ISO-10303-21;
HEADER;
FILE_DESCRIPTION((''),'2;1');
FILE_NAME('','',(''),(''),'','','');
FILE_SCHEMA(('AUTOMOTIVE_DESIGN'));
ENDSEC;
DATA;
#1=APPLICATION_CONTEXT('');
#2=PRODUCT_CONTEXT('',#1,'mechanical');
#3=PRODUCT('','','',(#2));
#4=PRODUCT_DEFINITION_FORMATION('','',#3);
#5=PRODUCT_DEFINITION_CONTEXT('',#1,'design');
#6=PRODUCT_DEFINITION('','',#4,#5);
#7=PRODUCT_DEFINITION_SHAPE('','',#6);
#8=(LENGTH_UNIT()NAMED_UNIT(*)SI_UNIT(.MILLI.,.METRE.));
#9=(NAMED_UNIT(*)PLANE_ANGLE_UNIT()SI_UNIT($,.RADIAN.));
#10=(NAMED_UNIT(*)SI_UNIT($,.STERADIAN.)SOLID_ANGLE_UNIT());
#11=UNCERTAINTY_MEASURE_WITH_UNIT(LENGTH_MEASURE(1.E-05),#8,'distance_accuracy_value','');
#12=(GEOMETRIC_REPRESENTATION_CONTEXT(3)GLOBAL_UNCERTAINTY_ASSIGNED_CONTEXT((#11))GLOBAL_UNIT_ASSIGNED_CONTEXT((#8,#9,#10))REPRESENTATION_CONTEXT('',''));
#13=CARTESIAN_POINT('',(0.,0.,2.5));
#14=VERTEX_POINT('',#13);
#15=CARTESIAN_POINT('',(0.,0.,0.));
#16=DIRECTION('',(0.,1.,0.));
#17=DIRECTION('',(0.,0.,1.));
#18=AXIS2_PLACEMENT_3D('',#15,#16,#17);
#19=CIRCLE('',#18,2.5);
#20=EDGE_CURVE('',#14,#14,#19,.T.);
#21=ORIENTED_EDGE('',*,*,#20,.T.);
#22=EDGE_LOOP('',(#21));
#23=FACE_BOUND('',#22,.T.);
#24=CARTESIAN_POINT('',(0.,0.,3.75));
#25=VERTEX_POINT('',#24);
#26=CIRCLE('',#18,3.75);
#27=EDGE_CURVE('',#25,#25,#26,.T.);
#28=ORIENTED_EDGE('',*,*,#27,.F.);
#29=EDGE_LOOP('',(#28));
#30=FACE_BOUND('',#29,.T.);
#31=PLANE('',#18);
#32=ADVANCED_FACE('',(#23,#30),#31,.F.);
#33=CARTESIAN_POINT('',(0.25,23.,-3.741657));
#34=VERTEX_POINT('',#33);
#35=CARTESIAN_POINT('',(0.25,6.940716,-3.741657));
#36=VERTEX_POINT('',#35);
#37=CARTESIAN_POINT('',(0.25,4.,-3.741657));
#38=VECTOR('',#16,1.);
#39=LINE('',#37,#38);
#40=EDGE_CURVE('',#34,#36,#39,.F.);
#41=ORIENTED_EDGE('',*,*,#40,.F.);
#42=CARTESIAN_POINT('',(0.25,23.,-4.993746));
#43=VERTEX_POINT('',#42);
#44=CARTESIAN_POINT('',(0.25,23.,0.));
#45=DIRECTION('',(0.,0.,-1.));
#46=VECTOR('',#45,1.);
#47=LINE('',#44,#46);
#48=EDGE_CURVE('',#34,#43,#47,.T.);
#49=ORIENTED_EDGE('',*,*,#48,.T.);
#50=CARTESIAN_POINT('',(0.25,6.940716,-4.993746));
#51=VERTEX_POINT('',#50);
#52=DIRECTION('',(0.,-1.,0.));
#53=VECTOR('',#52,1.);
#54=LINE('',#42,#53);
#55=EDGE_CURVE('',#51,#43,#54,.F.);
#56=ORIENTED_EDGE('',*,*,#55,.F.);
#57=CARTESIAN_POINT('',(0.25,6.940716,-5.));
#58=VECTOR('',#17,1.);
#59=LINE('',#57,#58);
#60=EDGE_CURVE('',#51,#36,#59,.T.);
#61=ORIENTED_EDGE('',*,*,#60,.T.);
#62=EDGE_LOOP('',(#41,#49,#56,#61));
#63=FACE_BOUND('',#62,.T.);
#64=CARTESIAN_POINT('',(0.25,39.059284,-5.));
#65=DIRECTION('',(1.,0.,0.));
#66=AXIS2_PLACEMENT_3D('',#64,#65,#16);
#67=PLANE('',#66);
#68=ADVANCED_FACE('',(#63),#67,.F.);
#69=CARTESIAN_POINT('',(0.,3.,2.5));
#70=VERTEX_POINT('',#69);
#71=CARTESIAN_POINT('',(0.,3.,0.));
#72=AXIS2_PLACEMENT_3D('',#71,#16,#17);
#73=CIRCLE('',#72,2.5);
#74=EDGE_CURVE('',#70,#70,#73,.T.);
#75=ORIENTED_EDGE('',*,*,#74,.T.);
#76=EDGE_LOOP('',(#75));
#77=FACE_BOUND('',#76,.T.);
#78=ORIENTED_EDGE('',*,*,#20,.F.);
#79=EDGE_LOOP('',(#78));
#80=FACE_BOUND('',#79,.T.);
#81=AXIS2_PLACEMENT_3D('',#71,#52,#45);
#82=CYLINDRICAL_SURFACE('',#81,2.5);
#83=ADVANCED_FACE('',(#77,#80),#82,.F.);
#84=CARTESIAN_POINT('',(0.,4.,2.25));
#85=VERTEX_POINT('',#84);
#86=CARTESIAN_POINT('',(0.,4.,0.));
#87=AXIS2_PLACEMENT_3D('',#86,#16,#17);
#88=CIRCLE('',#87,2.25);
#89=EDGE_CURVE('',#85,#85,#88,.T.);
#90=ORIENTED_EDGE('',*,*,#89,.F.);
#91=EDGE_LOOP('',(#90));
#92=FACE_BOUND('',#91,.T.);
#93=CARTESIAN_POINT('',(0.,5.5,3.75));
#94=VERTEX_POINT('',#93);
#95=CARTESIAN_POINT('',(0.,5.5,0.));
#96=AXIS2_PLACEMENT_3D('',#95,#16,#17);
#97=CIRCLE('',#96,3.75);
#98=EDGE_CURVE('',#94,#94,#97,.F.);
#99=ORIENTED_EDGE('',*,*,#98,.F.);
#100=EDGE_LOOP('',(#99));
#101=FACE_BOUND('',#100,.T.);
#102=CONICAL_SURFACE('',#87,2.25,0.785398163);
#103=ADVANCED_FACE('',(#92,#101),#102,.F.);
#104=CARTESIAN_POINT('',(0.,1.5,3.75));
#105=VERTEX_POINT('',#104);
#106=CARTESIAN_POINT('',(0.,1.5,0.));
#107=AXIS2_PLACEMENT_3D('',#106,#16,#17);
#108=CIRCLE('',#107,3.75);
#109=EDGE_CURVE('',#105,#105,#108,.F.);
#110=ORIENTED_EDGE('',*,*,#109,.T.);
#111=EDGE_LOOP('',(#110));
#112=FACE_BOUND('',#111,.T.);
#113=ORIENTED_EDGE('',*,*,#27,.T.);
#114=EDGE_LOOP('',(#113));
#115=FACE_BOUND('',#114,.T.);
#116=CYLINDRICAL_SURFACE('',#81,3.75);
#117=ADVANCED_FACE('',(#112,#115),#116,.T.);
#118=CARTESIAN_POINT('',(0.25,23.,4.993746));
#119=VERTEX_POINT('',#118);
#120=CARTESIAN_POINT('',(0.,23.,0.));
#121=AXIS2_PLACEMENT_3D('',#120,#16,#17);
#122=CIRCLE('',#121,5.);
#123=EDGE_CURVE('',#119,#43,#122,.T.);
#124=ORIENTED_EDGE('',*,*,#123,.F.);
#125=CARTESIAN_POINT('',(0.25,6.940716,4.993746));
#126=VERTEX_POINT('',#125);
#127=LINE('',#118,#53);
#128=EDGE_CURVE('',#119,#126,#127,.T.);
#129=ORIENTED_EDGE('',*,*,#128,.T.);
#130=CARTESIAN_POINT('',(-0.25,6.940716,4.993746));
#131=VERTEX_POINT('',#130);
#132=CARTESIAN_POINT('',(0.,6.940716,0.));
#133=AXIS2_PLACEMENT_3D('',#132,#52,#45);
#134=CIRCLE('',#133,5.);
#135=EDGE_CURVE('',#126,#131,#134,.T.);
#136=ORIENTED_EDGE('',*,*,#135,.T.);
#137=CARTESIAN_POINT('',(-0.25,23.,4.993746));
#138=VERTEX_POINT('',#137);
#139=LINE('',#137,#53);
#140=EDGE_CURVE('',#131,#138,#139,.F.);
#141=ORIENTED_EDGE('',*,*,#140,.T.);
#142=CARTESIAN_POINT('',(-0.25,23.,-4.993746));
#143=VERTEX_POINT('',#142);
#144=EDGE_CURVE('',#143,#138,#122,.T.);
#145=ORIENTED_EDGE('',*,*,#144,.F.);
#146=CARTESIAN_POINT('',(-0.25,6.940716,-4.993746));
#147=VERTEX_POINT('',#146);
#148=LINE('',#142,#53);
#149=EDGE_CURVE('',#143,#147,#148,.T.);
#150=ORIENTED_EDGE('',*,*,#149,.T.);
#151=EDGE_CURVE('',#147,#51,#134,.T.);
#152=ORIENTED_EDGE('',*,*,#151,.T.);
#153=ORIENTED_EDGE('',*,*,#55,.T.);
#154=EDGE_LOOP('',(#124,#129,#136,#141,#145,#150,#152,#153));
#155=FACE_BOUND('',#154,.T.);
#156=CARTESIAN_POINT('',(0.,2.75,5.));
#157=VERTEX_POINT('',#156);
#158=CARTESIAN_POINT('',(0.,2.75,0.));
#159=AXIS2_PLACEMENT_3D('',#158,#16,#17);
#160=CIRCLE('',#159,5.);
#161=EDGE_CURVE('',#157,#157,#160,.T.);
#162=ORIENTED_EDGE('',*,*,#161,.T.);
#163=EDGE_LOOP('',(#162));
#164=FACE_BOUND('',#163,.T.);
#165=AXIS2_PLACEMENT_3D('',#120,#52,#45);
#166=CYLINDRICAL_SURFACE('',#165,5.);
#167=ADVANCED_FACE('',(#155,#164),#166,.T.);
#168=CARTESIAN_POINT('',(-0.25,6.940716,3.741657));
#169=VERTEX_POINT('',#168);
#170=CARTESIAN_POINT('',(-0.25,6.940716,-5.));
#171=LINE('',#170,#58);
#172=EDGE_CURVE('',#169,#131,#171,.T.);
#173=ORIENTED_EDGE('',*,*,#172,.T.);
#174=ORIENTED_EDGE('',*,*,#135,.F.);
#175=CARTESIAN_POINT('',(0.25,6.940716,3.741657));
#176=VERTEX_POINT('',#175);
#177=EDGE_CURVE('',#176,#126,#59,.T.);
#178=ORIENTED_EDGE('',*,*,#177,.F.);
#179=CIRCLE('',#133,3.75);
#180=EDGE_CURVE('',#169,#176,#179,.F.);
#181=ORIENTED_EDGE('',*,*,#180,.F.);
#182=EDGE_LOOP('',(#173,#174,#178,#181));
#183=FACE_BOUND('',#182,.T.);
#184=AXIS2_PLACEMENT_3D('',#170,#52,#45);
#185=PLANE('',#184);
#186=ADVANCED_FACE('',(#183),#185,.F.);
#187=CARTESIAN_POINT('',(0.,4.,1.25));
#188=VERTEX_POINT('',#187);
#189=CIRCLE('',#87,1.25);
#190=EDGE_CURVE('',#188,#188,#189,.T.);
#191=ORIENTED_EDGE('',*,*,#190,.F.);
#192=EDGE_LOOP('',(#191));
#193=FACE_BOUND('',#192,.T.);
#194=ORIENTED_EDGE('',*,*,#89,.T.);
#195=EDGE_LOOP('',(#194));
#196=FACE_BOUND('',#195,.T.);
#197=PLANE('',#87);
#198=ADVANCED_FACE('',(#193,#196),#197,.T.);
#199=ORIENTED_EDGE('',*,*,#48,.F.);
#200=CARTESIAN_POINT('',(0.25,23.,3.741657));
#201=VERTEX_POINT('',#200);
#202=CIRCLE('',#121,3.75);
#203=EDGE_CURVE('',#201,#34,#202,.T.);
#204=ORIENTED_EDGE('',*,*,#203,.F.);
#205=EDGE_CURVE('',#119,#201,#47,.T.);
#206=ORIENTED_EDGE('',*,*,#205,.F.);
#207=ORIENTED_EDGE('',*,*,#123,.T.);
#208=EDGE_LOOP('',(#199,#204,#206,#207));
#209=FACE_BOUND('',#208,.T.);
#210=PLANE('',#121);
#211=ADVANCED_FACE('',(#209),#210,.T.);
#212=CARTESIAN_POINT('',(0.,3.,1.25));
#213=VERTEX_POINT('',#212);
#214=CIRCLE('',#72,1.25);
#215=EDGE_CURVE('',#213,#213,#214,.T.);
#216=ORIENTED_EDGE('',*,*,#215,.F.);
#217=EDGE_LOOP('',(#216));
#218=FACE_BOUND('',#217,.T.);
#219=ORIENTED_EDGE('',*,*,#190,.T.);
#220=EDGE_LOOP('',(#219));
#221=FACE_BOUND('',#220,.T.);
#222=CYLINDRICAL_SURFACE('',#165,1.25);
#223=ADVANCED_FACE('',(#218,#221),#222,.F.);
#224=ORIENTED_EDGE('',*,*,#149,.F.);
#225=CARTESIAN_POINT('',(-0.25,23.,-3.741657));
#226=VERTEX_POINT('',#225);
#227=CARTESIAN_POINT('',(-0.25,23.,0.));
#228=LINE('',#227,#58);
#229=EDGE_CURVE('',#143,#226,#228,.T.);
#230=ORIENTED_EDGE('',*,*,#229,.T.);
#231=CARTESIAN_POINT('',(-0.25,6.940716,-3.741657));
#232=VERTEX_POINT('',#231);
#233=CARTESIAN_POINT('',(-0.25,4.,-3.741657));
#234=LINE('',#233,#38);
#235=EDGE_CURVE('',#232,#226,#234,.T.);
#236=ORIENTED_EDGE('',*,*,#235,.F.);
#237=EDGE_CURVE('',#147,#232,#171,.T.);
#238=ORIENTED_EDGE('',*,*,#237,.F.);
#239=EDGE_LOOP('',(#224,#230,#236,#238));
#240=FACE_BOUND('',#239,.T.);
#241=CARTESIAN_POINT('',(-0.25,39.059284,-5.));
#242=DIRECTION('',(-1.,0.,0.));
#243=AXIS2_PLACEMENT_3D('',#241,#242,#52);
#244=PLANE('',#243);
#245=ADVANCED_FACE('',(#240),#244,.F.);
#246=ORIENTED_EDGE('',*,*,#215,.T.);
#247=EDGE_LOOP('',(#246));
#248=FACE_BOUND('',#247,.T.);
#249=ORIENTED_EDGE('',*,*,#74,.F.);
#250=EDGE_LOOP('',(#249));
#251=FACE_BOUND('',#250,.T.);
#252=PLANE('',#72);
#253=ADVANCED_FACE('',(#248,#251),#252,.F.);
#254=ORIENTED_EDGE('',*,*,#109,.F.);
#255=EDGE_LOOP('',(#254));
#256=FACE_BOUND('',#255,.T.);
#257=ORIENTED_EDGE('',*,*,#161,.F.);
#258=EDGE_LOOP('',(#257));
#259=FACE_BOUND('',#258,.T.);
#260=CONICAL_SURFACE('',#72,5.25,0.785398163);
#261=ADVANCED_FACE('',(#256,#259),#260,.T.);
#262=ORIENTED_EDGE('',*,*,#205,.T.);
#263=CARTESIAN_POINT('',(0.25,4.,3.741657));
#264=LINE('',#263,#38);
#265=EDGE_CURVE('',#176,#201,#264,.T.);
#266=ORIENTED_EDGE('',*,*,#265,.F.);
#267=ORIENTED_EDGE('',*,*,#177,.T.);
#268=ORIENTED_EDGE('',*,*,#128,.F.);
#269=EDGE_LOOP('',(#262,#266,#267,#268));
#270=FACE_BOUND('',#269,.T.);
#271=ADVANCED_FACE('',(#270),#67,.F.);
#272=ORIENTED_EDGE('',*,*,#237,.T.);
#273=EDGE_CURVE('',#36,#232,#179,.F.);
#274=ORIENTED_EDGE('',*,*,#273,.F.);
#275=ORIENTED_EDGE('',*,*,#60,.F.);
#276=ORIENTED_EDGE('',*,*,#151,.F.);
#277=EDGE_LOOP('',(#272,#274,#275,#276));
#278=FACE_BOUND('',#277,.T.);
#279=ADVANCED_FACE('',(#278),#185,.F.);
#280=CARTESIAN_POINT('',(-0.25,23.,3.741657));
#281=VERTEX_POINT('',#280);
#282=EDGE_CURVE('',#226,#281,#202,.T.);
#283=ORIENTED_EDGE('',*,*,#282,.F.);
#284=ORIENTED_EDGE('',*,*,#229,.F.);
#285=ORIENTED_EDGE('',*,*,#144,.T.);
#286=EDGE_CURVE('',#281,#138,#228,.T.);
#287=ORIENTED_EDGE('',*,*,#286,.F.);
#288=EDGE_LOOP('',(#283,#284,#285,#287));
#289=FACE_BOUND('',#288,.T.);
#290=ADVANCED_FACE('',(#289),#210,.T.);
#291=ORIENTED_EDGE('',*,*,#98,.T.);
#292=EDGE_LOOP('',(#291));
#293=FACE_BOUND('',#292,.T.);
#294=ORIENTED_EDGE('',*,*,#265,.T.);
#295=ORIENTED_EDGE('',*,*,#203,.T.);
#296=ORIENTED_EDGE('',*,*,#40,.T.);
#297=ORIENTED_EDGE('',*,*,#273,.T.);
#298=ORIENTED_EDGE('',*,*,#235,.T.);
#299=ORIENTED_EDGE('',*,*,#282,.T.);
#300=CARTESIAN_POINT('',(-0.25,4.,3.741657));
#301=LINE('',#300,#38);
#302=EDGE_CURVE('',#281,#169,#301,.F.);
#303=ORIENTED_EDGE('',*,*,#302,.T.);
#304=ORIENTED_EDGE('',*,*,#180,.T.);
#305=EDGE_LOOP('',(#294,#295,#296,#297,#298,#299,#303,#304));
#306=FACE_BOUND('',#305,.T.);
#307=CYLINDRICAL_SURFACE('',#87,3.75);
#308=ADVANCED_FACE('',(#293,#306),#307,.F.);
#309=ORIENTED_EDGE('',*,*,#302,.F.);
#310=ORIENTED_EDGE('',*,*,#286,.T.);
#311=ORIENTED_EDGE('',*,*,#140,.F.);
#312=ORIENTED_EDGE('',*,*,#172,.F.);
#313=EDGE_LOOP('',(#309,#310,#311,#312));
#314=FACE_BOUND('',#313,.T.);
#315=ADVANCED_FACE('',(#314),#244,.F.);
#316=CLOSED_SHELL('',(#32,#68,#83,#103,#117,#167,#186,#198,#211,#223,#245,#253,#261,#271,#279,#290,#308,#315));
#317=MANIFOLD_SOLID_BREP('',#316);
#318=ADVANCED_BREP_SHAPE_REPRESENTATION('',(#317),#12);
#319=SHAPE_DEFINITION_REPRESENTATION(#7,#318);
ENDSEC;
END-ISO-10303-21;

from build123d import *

# Parameters (mm, degrees)
SKETCH1_R               = 3.75
SKETCH1_R_2             = 2.5
BOSS_EXTRUDE1_DEPTH     = 3
SKETCH2_R               = 5
SKETCH2_R_2             = 1.25
BOSS_EXTRUDE2_DEPTH     = 20
CUT_EXTRUDE1_START      = -19
SKETCH3_R               = 3.75
CUT_EXTRUDE1_DEPTH      = 19
CHAMFER1_SIZE           = 1.5
CUT_EXTRUDE2_DEPTH      = 25.062418831
CUT_EXTRUDE2_DEPTH_BACK = 25.062418831
SKETCH4_W               = 0.5
SKETCH4_H               = 32.118567902


with BuildPart() as part:
    # Sketch1 → Boss-Extrude1 (new body)
    with BuildSketch(Plane(origin=(0, 0, 0), x_dir=(1, 0, 0), z_dir=(0, 1, 0))):
        with Locations(Location((0, 0, 0), (0, 0, 270))):
            Circle(SKETCH1_R)
        with Locations(Location((0, 0, 0), (0, 0, 270))):
            Circle(SKETCH1_R_2, mode=Mode.SUBTRACT)
    extrude(amount=BOSS_EXTRUDE1_DEPTH)

    # Sketch2 → Boss-Extrude2 (add)
    with BuildSketch(Plane(origin=(0, 3, 0), x_dir=(1, 0, 0), z_dir=(0, 1, 0))):
        with Locations(Location((0, 0, 0), (0, 0, 270))):
            Circle(SKETCH2_R)
        with Locations(Location((0, 0, 0), (0, 0, 270))):
            Circle(SKETCH2_R_2, mode=Mode.SUBTRACT)
    extrude(amount=BOSS_EXTRUDE2_DEPTH)

    # Sketch3 → Cut-Extrude1 (cut)
    with BuildSketch(Plane(origin=(0, 23, 0), x_dir=(1, 0, 0), z_dir=(0, 1, 0)).offset(CUT_EXTRUDE1_START)):
        with Locations(Location((0, 0, 0), (0, 0, 270))):
            Circle(SKETCH3_R)
    extrude(amount=CUT_EXTRUDE1_DEPTH, mode=Mode.SUBTRACT)

    # Chamfer1
    # the kernel refuses this chamfer: 1.5 mm, written as the material it adds along each edge
    with BuildSketch(Plane(origin=(0, 3, 0), x_dir=(0, 0, 1), z_dir=(-1, 0, 0))) as chamfer1_piece_1_section:
        Polygon((3.75 + CHAMFER1_SIZE, 0), (3.75, -CHAMFER1_SIZE), (3.75, 0), align=None)
    chamfer1_piece_1 = revolve(axis=Axis((0, 3, 0), (0, 1, 0)), mode=Mode.PRIVATE)
    chamfer1_piece_1 = chamfer1_piece_1 & Plane(origin=(0, 2.126111001, 0), x_dir=(0, 0, 1), z_dir=(0, -1, 0)) * Cylinder(5, 22, mode=Mode.PRIVATE)
    add(chamfer1_piece_1)
    with BuildSketch(Plane(origin=(0, 4, 0), x_dir=(0, 0, 1), z_dir=(-1, 0, 0))) as chamfer1_piece_2:
        Polygon((3.75, CHAMFER1_SIZE), (3.75 - CHAMFER1_SIZE, 0), (3.75, 0), align=None)
    revolve(axis=Axis((0, 4, 0), (0, 1, 0)))

    # Sketch4 → Cut-Extrude2 (cut, two sides: drawn at the far end of the back side and taken through both)
    with BuildSketch(Plane.XY.offset(-CUT_EXTRUDE2_DEPTH_BACK)):
        with Locations((0, 23)):
            Rectangle(SKETCH4_W, SKETCH4_H)
    extrude(amount=CUT_EXTRUDE2_DEPTH + CUT_EXTRUDE2_DEPTH_BACK, mode=Mode.SUBTRACT)


solid = part.part
